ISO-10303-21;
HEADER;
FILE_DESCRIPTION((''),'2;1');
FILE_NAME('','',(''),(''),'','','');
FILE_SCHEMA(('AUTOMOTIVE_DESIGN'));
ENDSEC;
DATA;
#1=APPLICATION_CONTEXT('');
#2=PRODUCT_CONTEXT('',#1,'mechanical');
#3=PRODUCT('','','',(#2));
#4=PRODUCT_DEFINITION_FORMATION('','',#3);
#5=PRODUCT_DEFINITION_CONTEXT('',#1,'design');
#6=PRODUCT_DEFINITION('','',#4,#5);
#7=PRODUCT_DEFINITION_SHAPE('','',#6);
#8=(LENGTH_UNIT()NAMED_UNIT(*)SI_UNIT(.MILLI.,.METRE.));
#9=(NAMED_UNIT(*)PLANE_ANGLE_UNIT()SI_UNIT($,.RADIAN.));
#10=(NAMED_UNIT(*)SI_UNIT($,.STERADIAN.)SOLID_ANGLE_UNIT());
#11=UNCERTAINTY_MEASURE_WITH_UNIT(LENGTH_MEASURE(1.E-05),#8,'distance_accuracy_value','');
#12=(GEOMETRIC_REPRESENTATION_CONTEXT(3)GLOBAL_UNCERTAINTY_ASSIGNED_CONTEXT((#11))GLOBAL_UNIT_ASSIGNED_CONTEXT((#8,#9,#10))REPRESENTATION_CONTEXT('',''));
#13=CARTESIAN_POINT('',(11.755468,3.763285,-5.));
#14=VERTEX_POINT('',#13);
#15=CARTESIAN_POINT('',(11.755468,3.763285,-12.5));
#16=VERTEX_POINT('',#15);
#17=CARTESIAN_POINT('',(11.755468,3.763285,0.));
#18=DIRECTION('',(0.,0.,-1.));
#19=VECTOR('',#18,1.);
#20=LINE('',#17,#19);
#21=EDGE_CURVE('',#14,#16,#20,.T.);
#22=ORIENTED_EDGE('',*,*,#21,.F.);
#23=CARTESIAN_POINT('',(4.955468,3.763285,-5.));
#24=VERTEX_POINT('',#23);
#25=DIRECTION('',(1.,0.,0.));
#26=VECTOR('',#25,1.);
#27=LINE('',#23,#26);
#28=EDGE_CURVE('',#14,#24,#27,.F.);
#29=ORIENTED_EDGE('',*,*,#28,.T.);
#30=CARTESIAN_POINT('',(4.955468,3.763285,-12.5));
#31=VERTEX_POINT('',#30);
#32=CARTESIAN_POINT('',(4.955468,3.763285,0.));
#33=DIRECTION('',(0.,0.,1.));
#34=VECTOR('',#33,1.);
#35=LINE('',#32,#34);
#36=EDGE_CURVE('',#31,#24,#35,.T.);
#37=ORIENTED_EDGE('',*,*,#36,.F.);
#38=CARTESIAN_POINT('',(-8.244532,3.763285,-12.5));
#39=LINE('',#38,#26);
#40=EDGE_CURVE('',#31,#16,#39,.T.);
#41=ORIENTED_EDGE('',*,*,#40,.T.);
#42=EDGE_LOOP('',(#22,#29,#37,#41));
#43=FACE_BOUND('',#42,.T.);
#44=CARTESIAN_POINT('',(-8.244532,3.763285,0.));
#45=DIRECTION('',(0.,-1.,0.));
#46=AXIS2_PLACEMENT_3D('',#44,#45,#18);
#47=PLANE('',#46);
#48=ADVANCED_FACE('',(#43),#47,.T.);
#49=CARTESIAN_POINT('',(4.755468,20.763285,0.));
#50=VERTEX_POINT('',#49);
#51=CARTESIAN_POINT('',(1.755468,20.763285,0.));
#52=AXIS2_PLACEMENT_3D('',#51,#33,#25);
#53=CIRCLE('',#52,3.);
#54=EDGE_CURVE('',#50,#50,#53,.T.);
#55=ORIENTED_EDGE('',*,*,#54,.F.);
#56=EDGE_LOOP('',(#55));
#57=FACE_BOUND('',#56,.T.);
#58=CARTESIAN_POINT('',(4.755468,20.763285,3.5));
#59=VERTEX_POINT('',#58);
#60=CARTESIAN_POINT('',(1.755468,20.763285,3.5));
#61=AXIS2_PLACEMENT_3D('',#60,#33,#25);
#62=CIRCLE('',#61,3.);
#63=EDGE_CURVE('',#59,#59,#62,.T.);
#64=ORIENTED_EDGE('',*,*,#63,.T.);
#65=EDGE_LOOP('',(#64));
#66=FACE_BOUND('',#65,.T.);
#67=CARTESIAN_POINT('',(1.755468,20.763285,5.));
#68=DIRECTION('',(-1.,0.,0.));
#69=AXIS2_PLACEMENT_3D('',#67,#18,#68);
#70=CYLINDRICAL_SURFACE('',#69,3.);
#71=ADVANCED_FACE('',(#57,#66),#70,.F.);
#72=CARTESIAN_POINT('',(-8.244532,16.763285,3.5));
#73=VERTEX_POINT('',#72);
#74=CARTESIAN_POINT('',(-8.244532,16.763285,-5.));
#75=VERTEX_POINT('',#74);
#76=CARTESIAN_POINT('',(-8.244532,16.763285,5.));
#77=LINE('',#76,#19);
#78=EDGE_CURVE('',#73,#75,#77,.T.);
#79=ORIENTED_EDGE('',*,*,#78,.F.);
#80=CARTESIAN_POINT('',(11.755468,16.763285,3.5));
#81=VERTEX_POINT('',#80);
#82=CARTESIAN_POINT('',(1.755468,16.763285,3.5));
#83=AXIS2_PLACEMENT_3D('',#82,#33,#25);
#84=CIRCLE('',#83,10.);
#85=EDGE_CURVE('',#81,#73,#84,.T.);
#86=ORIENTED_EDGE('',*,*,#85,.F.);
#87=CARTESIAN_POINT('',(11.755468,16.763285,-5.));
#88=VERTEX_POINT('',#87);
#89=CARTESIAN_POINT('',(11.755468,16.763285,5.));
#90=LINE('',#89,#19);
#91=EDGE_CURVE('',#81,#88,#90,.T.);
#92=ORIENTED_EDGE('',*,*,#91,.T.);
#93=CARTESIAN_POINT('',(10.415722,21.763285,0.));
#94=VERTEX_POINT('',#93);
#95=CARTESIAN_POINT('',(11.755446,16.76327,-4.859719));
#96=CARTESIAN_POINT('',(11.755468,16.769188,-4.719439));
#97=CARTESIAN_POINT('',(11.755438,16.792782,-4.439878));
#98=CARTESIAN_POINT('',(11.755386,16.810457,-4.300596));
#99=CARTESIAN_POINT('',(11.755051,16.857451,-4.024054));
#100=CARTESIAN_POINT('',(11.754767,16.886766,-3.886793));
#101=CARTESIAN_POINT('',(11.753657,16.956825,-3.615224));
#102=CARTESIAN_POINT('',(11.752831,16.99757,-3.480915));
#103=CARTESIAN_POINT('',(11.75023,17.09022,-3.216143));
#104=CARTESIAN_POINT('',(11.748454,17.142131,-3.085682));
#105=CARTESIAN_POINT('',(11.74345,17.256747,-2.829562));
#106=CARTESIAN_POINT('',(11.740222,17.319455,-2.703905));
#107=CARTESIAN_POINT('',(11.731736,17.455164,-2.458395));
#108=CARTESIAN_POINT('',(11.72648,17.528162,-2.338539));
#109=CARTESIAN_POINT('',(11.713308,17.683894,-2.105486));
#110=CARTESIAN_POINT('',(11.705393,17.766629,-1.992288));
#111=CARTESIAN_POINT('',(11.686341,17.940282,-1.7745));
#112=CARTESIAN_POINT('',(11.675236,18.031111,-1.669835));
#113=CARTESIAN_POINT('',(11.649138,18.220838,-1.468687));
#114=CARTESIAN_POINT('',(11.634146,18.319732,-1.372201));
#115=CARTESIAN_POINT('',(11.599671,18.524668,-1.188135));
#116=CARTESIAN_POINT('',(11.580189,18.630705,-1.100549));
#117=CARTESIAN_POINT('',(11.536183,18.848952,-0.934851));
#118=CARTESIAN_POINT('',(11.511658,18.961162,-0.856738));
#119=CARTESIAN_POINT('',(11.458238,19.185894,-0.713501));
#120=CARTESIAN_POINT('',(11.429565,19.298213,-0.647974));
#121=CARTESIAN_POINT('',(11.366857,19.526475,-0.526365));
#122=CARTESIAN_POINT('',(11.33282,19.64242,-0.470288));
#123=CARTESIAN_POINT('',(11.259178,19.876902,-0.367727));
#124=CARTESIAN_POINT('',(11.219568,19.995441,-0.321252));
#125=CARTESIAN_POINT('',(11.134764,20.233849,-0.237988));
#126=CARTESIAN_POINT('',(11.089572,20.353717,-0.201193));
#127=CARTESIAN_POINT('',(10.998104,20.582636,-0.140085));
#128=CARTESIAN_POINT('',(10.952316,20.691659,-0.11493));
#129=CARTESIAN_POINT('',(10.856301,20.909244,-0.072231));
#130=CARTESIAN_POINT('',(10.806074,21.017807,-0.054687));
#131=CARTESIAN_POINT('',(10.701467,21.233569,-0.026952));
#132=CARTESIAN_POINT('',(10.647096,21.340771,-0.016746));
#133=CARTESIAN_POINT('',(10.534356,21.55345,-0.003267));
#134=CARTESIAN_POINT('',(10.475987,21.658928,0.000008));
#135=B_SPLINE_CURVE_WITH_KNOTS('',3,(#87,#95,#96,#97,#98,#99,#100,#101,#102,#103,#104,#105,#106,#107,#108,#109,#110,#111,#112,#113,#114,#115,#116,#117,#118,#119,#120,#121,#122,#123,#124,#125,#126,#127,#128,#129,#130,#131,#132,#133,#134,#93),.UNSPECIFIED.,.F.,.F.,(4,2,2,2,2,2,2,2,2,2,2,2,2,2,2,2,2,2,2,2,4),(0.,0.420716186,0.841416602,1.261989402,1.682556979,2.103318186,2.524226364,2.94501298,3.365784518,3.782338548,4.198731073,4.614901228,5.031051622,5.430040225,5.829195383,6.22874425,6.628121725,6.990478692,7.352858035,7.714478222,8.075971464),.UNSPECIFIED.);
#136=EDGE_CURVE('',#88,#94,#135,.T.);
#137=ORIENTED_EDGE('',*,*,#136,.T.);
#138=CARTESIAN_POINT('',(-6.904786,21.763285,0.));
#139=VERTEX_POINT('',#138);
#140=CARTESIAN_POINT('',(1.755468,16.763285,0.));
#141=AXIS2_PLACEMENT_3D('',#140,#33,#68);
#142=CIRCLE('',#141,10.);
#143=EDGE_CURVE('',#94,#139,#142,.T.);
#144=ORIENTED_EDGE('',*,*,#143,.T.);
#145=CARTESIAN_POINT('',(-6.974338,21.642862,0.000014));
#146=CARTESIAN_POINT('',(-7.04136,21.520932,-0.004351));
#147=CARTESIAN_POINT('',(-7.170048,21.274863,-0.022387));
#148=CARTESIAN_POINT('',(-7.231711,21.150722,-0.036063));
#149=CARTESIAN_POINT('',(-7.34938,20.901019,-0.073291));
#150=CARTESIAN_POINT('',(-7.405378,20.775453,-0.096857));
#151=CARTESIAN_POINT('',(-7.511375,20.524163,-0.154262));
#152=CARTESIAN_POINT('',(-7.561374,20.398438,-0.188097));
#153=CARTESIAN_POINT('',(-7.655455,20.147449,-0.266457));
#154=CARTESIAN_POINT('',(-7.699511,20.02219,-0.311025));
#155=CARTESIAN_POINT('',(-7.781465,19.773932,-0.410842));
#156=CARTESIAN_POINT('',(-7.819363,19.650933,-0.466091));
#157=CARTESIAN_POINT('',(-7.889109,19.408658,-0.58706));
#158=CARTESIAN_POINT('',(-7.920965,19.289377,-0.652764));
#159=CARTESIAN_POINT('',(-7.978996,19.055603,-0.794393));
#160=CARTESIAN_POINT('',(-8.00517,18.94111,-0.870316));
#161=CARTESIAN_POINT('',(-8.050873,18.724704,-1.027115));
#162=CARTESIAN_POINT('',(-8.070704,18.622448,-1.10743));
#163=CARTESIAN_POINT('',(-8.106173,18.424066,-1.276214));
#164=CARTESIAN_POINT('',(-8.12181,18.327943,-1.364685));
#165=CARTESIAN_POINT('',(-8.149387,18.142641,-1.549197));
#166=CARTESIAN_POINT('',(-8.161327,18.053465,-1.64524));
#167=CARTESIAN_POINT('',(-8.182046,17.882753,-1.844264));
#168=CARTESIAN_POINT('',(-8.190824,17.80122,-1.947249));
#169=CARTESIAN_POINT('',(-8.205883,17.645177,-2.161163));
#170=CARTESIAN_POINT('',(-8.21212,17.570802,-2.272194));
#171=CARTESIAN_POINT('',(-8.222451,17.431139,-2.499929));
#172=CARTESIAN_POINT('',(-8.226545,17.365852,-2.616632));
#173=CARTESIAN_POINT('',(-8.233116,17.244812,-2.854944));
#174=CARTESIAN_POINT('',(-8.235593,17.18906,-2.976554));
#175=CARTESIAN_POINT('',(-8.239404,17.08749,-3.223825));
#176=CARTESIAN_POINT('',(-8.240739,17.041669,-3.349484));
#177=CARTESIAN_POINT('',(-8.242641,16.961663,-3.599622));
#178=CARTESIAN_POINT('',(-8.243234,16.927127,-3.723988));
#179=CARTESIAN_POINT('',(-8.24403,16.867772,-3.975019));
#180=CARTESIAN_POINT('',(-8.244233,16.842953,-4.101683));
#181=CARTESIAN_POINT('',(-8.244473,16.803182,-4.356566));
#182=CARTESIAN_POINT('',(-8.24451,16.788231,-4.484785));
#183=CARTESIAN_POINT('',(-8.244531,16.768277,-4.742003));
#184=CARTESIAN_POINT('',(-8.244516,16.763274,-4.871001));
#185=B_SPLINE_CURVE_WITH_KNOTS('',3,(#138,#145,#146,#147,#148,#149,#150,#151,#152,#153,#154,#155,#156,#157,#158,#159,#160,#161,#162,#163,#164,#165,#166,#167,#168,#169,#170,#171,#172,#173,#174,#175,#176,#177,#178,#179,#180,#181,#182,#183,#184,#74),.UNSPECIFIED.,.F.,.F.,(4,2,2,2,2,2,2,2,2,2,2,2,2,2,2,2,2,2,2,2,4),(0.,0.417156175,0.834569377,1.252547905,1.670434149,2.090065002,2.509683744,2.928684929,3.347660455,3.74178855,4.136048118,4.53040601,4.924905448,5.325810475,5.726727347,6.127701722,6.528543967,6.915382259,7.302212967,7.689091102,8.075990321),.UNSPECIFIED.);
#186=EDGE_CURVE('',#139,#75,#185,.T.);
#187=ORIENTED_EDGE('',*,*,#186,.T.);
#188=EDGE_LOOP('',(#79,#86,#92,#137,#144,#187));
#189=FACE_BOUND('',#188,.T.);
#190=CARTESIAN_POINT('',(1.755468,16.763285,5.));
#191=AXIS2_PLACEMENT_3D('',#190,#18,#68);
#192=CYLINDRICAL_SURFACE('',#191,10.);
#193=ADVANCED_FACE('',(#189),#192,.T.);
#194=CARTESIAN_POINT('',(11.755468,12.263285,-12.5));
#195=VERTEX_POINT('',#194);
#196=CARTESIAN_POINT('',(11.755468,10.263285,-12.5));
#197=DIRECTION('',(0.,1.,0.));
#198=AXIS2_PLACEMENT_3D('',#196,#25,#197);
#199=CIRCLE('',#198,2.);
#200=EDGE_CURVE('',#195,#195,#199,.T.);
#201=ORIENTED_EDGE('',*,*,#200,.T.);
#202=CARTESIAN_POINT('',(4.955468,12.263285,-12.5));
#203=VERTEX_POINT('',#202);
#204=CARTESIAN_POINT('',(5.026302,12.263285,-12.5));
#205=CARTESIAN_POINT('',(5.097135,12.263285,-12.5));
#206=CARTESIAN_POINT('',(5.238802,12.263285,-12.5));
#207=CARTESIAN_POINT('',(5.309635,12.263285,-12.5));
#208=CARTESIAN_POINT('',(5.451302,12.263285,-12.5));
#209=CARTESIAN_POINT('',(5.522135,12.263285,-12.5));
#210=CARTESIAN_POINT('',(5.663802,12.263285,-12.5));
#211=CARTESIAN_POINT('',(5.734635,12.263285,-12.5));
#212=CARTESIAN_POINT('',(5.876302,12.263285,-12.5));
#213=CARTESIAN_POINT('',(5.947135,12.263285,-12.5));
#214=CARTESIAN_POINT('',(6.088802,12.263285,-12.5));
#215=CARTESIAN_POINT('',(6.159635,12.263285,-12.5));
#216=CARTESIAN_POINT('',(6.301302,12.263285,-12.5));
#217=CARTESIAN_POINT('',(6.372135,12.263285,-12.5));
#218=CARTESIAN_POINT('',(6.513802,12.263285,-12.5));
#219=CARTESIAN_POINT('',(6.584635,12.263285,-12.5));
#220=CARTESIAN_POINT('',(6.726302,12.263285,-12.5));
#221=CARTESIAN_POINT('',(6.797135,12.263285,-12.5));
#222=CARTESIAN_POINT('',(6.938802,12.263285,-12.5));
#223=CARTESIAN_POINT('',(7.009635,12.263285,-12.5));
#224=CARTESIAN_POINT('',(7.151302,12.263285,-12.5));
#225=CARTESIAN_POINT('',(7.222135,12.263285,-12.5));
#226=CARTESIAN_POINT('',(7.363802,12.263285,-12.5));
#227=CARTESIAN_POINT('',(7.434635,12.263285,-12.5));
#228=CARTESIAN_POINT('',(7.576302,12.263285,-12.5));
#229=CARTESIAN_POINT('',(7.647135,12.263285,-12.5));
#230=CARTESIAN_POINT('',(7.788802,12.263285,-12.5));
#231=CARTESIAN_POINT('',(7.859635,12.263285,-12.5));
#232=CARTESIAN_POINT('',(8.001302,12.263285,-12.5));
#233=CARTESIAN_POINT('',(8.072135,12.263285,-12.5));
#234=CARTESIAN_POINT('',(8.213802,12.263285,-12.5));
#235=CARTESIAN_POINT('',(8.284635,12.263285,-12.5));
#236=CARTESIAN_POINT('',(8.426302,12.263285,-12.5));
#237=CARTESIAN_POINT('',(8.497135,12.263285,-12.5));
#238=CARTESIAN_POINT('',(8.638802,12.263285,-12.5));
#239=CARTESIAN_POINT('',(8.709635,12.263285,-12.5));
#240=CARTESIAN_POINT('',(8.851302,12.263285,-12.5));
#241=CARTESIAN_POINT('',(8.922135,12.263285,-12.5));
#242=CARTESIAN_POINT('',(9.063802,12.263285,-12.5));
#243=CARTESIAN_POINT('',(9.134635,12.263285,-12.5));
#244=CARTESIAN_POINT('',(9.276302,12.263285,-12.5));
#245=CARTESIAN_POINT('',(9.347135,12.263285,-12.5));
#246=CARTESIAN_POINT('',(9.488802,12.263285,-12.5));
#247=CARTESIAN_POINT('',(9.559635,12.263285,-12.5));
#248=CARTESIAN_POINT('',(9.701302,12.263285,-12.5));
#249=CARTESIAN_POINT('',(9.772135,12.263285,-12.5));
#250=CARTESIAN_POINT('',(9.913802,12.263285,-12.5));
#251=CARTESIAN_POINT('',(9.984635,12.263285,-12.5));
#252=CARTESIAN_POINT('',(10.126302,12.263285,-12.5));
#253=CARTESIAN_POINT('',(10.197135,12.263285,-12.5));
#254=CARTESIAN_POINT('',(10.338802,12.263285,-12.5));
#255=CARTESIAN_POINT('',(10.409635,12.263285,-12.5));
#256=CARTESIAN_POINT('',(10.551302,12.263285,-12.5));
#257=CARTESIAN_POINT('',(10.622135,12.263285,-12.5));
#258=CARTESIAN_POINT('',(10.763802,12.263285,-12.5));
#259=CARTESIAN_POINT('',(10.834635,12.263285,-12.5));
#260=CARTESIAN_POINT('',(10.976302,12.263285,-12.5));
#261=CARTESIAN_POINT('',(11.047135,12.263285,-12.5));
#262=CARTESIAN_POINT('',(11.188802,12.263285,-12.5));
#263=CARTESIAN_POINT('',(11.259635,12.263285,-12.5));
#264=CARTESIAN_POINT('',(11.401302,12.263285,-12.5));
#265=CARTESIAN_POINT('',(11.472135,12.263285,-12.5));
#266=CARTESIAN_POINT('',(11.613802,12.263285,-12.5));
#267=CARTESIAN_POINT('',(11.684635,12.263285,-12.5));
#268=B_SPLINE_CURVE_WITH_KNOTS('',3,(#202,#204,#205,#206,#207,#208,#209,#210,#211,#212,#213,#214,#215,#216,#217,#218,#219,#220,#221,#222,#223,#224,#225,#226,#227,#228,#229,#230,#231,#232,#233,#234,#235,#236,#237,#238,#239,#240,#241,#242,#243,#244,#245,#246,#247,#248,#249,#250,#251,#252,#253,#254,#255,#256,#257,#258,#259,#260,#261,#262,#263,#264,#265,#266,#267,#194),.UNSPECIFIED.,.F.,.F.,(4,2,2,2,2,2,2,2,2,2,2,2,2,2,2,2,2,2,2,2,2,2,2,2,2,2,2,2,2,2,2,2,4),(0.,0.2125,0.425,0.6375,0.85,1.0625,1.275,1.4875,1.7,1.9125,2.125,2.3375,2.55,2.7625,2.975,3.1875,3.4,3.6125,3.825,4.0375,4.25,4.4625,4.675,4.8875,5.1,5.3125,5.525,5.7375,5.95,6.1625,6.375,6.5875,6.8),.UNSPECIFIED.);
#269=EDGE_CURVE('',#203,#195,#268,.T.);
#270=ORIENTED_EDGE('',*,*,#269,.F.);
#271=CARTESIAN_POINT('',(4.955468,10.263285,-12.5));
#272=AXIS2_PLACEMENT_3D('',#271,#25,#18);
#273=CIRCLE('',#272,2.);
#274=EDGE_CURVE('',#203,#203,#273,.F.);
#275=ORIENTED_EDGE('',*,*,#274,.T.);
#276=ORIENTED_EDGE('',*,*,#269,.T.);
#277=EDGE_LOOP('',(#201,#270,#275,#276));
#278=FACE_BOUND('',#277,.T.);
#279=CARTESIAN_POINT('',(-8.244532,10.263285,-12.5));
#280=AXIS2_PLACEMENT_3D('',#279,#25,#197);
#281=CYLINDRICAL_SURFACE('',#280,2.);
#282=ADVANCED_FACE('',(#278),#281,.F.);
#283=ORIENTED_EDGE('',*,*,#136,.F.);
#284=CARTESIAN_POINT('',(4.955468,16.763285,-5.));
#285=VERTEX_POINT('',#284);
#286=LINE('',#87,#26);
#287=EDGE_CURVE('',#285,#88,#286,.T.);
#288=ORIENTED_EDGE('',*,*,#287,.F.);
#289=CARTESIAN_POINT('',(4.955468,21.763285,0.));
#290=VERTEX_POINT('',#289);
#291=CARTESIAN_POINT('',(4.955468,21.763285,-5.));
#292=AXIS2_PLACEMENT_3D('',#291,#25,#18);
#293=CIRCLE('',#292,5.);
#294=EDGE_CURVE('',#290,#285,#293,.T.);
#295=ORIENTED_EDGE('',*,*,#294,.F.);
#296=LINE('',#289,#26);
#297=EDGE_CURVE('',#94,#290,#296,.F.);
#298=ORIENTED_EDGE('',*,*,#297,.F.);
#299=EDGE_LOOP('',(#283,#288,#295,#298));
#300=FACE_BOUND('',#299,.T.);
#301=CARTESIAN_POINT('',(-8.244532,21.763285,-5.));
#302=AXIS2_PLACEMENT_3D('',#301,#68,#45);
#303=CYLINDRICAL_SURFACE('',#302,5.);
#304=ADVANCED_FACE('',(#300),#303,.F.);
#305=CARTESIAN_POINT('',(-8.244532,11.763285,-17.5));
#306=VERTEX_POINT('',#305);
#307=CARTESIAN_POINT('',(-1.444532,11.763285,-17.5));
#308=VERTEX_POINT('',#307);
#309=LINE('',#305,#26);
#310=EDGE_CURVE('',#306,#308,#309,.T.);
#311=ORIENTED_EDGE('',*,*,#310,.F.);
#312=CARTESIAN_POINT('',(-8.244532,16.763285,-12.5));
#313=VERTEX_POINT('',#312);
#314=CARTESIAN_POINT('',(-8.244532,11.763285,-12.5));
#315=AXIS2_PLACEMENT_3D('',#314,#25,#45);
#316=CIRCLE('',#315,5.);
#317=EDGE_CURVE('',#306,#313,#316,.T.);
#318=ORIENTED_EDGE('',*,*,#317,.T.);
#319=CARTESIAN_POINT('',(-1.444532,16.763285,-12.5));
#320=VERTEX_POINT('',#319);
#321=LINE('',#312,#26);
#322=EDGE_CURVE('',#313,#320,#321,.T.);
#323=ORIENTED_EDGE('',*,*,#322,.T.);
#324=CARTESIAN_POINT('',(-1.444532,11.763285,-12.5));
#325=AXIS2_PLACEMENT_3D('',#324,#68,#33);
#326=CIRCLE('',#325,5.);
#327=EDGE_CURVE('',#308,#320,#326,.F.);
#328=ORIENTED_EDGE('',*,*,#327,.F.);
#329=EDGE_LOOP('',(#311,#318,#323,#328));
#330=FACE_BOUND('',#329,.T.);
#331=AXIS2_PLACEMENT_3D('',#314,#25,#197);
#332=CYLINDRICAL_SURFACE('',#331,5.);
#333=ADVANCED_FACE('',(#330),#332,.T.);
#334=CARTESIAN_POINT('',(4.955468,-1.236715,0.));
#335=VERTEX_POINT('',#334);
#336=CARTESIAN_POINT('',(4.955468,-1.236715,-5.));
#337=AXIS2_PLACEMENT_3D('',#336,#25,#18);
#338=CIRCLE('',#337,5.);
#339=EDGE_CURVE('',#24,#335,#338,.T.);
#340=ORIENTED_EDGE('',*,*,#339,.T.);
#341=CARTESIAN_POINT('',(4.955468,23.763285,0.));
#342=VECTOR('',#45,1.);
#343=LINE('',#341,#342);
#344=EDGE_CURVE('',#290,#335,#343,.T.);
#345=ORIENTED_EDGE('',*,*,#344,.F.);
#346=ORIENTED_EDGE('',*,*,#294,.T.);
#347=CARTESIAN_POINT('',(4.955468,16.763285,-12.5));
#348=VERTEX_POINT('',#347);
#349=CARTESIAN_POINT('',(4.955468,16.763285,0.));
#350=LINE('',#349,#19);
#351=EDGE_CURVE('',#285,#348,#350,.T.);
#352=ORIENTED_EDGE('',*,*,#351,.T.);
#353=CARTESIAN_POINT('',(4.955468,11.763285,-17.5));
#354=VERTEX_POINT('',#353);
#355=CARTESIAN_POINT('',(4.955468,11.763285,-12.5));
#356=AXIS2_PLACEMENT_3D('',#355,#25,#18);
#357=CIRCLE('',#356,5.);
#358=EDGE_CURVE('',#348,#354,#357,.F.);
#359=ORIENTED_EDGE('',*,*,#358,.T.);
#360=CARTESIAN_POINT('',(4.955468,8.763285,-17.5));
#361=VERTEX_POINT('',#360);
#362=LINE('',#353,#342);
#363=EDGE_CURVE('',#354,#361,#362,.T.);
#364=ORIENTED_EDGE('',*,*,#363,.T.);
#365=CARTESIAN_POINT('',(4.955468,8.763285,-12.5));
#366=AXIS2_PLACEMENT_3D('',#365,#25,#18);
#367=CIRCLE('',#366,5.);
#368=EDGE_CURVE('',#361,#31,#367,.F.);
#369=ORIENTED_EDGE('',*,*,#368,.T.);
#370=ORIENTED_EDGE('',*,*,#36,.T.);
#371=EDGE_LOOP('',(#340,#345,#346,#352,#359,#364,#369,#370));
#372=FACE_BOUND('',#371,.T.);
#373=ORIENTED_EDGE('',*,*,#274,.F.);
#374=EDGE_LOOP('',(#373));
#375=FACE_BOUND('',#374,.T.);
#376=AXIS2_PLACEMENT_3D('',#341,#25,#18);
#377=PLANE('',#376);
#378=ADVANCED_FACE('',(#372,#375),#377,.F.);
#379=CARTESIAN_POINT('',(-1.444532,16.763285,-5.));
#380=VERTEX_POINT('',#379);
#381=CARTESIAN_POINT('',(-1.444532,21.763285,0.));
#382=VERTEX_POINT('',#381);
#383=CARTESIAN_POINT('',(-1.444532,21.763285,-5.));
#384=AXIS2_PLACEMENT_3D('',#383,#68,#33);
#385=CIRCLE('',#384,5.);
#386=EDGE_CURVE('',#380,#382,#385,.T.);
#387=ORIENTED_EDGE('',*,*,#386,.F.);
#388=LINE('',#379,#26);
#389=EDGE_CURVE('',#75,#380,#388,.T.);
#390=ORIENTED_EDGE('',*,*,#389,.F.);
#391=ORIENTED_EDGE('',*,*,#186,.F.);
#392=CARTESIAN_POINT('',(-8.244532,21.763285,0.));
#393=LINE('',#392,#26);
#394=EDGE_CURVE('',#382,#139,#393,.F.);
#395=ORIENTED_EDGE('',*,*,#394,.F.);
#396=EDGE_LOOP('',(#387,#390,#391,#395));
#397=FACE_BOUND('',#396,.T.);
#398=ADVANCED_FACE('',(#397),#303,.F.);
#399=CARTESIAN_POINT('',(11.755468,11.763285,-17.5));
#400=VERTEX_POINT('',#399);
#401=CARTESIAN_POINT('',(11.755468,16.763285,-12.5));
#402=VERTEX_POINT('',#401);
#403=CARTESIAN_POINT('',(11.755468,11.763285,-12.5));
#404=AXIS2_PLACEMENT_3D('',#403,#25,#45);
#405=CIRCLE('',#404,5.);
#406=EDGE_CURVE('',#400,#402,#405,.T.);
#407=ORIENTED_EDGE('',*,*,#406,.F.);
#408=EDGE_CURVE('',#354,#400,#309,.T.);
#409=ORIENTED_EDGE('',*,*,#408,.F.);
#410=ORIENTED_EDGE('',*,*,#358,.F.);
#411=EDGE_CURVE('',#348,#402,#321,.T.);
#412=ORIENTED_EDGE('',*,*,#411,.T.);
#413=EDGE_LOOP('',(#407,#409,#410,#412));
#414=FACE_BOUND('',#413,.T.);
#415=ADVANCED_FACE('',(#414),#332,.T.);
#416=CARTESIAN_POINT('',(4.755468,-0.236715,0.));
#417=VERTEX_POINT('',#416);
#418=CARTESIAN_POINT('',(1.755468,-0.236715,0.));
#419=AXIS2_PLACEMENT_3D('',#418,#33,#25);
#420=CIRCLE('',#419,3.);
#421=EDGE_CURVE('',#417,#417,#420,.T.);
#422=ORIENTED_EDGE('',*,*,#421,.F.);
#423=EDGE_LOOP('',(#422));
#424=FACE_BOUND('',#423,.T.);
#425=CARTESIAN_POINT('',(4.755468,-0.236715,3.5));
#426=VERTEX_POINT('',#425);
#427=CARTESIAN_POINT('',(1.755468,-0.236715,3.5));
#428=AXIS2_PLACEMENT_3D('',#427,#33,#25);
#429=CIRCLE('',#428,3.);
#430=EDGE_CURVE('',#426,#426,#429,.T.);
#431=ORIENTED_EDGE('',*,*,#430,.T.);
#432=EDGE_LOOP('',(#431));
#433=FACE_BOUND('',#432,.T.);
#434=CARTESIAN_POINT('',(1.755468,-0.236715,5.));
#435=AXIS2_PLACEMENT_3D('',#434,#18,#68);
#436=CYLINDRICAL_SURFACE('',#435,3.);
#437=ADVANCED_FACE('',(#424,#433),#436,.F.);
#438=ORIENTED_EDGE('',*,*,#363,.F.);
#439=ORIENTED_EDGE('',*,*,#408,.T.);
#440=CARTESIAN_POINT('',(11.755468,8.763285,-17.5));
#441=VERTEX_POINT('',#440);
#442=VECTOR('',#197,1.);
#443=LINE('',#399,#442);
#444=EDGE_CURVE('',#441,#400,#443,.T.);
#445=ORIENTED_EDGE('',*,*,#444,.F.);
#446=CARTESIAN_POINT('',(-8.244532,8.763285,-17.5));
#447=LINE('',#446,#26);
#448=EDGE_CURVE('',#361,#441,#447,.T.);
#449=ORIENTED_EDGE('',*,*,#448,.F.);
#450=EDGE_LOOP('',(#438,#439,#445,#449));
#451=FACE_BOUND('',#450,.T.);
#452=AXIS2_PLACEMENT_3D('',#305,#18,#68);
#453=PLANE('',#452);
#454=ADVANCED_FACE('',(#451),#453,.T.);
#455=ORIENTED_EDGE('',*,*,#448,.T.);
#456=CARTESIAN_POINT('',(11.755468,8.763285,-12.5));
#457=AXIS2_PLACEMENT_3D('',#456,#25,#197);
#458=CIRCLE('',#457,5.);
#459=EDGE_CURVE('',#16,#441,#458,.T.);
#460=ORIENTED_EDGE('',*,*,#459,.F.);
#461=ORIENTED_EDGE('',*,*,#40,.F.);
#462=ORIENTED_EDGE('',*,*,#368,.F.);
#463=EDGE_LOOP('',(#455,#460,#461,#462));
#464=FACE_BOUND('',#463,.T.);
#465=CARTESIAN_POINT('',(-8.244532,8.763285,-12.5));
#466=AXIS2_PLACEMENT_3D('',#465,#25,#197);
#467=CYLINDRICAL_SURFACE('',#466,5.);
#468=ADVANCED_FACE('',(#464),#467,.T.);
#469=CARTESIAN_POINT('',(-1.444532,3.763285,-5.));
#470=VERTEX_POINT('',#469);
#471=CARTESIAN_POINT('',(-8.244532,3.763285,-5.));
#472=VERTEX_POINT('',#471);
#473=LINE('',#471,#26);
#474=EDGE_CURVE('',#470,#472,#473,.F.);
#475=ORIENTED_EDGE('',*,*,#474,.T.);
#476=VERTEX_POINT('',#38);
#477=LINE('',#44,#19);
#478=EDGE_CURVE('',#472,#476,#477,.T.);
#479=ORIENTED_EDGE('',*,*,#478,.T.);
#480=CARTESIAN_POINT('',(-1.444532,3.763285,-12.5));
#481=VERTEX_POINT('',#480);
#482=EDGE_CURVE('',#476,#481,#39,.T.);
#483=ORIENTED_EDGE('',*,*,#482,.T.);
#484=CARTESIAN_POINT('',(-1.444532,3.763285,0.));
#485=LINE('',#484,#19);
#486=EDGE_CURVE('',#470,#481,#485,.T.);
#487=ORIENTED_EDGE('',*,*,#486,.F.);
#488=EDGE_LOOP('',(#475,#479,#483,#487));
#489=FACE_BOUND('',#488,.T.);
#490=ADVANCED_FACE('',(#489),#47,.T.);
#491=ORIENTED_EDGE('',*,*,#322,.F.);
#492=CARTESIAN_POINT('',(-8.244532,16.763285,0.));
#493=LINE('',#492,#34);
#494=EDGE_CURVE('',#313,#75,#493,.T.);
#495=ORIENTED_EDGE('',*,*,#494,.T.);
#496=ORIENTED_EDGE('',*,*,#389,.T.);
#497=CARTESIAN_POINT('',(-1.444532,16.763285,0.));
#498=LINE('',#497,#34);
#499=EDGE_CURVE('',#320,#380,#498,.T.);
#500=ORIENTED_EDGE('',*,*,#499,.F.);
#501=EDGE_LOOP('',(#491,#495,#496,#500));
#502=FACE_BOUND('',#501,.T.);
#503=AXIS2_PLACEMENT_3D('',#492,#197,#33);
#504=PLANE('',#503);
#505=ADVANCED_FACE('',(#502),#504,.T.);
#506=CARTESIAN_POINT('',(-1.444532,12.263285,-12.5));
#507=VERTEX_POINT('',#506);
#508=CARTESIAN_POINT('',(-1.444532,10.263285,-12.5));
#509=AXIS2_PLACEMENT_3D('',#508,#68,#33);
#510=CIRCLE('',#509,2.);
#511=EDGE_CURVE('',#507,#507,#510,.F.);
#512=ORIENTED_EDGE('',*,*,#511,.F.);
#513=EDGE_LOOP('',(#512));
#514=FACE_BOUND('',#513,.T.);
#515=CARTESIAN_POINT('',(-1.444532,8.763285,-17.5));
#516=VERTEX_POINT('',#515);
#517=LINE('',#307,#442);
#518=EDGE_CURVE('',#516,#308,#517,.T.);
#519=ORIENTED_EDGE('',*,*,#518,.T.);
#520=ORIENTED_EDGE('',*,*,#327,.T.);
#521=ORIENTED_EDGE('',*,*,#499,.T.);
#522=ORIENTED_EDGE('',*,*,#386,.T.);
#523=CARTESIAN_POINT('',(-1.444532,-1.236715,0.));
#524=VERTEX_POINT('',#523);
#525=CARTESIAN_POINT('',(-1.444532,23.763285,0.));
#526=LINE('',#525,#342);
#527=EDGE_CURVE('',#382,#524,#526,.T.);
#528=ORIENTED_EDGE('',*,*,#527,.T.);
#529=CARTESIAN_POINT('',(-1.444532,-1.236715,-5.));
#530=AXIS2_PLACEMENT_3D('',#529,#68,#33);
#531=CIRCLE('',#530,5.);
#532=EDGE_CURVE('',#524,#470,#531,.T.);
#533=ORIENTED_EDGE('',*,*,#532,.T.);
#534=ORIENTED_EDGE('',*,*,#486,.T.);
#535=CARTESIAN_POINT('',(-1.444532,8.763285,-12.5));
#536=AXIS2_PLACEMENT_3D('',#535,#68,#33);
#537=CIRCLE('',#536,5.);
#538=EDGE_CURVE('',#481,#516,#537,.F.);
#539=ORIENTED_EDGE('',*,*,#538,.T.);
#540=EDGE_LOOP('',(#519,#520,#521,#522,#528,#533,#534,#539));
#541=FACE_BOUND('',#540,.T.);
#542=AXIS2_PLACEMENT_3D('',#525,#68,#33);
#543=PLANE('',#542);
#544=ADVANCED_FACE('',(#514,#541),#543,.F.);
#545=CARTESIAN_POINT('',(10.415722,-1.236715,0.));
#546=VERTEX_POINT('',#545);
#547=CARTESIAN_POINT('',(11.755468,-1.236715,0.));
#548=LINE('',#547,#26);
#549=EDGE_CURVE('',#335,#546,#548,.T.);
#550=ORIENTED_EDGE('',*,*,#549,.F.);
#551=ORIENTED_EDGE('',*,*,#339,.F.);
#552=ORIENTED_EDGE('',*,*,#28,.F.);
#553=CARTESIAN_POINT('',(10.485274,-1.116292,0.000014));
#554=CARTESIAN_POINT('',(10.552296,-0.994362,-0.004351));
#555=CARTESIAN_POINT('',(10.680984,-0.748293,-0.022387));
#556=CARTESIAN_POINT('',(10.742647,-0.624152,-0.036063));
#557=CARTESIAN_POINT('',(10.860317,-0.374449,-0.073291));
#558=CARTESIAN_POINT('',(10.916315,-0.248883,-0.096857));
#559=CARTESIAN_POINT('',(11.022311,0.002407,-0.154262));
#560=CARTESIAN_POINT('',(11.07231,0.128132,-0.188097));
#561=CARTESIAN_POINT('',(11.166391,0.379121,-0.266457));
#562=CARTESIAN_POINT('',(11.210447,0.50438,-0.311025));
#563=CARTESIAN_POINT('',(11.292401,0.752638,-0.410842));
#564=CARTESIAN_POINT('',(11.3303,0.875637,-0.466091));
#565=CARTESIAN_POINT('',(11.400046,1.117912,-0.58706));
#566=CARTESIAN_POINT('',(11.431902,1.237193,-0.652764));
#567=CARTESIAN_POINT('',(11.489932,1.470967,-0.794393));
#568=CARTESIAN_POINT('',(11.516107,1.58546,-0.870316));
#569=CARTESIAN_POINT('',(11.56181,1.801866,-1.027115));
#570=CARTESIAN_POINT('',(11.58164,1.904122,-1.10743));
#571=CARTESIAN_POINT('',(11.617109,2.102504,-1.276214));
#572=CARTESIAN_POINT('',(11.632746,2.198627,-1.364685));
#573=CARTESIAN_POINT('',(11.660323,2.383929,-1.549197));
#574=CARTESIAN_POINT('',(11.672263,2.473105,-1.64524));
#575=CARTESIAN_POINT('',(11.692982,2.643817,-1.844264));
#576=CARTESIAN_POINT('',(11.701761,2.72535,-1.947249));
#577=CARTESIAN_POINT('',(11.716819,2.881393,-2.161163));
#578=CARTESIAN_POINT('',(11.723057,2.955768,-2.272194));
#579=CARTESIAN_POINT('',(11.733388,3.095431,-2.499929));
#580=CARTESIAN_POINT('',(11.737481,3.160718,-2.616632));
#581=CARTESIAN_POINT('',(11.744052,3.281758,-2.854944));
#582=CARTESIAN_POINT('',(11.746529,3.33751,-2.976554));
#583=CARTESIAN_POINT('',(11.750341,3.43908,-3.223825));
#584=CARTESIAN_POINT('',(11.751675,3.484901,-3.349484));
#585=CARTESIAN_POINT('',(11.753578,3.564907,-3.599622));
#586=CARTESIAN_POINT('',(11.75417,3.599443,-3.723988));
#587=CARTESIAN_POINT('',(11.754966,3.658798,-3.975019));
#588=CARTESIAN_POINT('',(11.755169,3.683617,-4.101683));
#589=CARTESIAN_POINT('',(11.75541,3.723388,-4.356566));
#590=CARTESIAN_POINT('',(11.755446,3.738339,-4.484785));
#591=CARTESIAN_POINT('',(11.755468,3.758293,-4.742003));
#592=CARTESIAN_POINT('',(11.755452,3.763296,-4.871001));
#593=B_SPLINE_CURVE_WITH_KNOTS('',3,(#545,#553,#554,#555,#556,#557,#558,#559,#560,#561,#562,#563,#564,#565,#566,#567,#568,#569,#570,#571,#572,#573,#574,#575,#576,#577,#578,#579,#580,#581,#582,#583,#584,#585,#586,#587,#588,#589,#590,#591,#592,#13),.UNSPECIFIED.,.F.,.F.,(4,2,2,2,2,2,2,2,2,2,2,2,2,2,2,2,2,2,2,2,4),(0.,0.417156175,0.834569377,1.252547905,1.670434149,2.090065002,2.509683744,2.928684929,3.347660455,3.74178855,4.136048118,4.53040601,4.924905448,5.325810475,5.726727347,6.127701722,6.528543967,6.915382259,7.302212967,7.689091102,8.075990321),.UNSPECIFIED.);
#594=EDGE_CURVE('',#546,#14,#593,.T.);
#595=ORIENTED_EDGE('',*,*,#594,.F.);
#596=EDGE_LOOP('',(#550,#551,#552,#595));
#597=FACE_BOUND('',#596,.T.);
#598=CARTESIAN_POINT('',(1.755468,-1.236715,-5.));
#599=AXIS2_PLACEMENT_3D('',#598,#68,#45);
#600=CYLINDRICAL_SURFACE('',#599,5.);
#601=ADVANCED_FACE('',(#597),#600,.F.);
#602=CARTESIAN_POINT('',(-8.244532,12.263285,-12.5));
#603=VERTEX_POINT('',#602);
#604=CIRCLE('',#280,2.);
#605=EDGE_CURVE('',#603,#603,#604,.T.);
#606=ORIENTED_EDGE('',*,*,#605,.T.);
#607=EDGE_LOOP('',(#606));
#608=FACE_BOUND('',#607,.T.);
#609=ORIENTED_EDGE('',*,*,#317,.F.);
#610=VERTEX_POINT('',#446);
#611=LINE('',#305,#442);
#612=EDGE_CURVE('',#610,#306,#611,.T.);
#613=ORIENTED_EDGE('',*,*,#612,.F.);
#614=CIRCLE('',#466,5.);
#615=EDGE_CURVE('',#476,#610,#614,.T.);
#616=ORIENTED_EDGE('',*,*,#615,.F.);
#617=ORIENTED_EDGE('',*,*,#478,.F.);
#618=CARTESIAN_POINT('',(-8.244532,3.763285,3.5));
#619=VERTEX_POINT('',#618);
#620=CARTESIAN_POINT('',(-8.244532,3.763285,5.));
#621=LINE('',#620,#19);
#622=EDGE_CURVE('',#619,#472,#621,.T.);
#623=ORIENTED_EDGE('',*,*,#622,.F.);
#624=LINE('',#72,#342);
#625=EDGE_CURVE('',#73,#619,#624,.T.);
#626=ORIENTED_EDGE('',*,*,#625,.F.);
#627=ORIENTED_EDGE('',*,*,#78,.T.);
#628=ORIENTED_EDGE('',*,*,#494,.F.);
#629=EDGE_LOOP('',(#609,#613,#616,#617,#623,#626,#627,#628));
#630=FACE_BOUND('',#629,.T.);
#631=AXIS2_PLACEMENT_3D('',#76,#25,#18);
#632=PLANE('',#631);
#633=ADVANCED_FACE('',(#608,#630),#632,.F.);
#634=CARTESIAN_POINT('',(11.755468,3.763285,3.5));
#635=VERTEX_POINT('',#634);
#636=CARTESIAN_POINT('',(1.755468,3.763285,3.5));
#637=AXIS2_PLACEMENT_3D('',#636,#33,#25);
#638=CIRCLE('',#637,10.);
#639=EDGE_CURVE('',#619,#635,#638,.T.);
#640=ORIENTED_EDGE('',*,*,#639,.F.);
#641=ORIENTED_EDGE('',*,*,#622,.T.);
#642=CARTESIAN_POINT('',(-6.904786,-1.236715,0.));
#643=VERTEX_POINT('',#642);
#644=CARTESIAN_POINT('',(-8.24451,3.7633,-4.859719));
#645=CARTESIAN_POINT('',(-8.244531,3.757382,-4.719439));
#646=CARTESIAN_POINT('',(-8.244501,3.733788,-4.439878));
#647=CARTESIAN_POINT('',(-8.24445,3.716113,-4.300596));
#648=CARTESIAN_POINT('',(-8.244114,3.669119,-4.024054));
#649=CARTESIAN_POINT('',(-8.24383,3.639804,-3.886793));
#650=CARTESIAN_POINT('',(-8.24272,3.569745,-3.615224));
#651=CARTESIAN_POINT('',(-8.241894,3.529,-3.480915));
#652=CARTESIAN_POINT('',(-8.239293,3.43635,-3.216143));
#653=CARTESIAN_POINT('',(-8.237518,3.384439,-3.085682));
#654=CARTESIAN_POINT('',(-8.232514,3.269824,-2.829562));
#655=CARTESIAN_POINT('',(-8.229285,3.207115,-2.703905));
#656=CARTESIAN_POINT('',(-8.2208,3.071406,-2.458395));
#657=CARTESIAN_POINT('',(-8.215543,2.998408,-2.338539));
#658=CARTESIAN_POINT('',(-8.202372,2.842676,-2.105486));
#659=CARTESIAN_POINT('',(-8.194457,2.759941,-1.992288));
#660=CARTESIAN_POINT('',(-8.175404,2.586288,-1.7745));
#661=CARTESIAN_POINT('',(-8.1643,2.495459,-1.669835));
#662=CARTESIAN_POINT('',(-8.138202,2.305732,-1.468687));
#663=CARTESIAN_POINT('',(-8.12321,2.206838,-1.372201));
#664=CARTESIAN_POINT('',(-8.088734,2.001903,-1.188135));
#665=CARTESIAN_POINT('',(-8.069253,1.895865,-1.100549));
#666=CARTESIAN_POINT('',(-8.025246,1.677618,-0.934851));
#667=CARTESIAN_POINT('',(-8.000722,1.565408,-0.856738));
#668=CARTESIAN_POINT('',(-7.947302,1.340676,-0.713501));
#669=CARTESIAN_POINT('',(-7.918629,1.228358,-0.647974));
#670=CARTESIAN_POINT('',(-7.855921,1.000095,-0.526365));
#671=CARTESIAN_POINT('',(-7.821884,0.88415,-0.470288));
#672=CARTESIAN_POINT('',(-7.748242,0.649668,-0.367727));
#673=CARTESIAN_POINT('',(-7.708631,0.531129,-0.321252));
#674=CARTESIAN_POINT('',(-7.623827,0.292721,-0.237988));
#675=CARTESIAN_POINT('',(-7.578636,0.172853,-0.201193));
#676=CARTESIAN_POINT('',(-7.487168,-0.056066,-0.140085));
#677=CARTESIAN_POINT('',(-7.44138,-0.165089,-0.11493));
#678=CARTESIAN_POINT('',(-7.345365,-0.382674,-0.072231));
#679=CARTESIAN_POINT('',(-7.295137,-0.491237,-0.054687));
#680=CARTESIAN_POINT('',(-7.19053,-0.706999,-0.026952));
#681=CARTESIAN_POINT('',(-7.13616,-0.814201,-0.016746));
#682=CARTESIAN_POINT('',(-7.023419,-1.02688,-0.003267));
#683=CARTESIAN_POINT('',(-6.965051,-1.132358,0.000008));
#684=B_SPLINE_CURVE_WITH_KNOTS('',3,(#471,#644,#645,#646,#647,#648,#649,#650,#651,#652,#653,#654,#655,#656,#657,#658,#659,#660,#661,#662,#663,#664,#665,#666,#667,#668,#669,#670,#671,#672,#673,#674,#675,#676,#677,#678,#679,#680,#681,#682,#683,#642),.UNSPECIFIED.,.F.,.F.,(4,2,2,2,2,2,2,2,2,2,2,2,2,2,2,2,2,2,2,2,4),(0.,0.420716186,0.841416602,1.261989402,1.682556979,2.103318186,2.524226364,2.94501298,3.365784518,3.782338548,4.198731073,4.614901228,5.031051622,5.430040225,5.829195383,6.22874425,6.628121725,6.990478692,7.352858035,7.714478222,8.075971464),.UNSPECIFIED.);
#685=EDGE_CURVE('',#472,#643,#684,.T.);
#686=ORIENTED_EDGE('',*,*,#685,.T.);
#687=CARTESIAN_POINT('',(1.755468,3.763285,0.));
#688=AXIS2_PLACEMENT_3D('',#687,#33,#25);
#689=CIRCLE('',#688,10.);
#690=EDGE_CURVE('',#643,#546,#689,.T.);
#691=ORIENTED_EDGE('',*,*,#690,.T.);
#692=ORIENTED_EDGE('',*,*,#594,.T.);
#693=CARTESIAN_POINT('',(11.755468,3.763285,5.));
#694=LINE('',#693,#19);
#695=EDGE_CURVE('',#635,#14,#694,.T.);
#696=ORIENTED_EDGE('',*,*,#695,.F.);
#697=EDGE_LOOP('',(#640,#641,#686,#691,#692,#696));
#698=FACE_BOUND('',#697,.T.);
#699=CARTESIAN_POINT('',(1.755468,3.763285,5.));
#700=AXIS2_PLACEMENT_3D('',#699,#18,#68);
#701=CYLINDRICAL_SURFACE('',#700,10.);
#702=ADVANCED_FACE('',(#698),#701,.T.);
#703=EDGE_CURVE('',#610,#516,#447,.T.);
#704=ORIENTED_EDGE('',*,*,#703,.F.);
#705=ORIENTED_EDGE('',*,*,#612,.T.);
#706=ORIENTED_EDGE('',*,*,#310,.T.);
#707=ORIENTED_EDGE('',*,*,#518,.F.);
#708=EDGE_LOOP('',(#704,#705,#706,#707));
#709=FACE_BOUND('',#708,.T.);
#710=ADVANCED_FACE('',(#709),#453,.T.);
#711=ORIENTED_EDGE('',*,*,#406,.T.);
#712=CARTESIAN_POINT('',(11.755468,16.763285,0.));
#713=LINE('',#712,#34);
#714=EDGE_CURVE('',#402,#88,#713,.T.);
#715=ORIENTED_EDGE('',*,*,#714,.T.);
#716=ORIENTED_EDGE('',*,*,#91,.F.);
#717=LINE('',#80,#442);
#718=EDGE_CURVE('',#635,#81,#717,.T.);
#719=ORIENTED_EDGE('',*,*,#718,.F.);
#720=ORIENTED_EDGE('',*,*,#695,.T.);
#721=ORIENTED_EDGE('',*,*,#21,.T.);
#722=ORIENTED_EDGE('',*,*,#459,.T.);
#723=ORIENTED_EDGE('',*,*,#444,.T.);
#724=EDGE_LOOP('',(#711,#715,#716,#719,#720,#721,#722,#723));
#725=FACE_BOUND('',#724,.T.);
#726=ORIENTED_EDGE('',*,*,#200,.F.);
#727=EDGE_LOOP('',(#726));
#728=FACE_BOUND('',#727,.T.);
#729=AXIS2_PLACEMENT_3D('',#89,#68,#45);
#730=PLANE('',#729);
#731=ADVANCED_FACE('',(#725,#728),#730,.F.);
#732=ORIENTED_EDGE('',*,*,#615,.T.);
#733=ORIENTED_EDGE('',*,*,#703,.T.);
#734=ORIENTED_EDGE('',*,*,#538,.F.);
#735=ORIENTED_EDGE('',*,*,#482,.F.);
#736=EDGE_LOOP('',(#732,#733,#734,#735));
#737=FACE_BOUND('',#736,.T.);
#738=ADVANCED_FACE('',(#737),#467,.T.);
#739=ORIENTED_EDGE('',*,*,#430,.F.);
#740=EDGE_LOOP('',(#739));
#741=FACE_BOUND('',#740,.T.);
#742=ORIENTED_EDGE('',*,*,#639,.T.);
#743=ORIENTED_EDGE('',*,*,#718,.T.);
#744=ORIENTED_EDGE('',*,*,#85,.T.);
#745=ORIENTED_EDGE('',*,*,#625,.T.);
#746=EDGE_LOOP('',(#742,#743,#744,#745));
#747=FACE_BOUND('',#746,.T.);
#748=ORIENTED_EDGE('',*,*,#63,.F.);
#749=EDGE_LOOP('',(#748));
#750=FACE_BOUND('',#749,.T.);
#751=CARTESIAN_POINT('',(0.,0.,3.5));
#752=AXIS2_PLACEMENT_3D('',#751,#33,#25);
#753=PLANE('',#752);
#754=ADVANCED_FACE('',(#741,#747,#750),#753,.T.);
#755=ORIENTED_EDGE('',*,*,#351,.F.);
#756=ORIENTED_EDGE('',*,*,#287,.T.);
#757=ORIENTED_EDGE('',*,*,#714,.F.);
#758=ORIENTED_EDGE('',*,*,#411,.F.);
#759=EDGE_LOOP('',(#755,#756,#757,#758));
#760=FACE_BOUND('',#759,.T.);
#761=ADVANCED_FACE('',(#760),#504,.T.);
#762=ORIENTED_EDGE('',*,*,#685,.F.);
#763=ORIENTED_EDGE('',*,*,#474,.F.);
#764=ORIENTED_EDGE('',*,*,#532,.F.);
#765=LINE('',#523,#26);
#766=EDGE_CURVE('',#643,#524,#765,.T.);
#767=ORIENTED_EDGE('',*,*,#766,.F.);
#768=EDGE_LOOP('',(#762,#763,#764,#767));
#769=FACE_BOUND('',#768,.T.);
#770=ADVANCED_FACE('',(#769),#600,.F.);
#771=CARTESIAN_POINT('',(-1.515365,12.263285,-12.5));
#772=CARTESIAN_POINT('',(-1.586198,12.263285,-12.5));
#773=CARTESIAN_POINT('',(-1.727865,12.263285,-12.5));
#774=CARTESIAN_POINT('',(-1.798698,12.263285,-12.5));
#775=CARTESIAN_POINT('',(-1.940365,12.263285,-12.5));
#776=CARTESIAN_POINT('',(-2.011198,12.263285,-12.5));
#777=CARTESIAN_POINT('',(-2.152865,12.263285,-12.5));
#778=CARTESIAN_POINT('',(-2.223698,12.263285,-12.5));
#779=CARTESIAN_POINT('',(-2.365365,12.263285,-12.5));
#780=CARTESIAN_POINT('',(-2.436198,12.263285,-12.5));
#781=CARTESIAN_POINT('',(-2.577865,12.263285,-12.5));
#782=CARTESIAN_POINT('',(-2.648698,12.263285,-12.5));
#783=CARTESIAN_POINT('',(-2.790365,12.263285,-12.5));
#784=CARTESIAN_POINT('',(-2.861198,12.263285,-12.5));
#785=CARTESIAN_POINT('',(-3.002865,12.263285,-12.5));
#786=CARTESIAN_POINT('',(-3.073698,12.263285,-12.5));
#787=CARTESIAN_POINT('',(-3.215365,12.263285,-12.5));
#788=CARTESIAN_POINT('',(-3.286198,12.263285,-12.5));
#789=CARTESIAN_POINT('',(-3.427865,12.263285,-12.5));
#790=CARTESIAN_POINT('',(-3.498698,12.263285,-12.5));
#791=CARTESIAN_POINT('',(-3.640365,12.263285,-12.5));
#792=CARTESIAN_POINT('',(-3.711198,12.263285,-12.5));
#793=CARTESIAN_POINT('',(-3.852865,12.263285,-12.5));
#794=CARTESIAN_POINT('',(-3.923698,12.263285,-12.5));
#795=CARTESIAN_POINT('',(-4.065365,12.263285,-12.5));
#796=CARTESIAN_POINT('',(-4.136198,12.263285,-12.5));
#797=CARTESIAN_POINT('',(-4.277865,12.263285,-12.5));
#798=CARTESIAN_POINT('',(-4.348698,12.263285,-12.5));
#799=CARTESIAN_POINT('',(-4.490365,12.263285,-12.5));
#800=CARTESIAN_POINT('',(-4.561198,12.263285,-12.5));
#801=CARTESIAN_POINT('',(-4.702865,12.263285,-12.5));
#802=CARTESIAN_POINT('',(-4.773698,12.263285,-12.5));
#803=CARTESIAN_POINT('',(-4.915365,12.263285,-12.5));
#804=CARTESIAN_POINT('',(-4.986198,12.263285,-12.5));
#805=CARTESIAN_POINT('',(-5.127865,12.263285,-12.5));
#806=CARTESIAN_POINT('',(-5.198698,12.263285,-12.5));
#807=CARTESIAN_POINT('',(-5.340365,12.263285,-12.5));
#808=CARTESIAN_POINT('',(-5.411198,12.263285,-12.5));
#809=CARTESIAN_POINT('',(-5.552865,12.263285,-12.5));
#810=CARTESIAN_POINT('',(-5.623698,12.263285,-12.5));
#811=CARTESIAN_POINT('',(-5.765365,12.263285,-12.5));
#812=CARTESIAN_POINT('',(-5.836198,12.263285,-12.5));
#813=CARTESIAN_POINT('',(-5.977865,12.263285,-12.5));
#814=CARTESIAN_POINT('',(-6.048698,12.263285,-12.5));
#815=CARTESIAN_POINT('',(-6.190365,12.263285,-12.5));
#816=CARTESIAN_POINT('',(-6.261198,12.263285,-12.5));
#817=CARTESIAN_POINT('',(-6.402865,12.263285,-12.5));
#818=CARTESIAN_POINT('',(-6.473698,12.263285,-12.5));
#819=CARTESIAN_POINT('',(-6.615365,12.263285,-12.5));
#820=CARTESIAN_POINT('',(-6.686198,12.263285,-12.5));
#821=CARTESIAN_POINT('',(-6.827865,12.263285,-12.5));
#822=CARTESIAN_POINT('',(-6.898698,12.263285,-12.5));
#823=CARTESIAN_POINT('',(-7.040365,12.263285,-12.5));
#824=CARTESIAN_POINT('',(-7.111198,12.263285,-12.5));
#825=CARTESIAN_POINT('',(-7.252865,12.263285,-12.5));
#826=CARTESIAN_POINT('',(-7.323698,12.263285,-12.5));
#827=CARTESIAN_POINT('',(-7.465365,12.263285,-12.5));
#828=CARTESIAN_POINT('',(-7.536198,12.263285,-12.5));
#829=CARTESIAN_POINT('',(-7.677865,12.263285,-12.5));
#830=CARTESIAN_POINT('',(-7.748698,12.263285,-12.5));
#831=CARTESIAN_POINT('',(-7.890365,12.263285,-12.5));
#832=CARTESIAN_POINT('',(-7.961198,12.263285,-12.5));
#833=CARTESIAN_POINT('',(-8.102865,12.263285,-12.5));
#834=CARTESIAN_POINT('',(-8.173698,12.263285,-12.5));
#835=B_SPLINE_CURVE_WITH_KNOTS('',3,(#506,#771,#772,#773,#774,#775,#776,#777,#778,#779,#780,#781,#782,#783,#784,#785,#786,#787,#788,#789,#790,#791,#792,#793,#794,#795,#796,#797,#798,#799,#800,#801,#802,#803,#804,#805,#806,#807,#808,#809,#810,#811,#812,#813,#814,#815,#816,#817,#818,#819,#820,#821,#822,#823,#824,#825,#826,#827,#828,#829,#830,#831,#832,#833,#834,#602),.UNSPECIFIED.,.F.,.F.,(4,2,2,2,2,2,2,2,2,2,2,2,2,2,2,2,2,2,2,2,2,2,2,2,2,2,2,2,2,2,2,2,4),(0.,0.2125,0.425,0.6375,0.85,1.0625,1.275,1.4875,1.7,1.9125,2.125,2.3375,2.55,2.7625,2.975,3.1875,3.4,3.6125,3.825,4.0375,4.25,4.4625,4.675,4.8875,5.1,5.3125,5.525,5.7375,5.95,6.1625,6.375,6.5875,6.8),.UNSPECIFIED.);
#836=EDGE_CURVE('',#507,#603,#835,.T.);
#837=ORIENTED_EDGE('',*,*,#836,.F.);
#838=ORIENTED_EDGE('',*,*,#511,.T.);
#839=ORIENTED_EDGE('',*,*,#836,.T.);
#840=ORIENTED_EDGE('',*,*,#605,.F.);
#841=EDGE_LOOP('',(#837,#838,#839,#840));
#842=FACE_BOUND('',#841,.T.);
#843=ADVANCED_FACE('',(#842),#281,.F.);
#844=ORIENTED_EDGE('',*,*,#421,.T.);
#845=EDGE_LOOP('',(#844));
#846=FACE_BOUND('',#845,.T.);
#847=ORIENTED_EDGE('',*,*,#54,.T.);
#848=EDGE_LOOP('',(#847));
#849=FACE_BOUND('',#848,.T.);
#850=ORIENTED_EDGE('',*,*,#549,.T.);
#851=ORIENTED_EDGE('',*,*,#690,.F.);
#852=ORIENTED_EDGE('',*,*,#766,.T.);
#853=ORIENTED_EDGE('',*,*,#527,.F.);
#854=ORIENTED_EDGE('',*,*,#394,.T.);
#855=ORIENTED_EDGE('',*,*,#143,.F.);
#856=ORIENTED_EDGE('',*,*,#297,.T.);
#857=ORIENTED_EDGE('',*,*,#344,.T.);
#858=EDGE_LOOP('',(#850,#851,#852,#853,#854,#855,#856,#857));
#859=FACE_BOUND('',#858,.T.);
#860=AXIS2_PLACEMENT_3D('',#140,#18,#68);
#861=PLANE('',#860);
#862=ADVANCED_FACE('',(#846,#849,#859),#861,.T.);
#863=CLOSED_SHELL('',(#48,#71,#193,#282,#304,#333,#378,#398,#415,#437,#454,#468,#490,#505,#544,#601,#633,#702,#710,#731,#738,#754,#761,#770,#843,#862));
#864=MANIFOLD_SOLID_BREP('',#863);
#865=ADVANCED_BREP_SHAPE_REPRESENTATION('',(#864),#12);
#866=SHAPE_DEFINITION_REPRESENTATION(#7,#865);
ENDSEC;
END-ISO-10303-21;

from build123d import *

# Parameters (mm, degrees)
ESQUISSE1_R             = 3
BOSS_EXTRU_1_DEPTH      = 5
ESQUISSE2_R             = 2
BOSS_EXTRU_2_DEPTH      = 20
ESQUISSE3_W             = 6.4
ESQUISSE3_H             = 20
ENL_V_MAT_EXTRU_1_DEPTH = 20
CONG_1_R                = 5
ESQUISSE4_W             = 33.851998375
ESQUISSE4_H             = 43.433745971
ENL_V_MAT_EXTRU_2_DEPTH = 1.5


with BuildPart() as part:
    # Esquisse1 → Boss.-Extru.1 (new body)
    with BuildSketch(Plane.XY):
        with BuildLine():
            Line((-8.244531767, 16.763285024), (-8.244531767, 3.763285024))
            ThreePointArc((-8.244531767, 3.763285024), (1.755468233, -6.236714976), (11.755468233, 3.763285024))
            Line((11.755468233, 3.763285024), (11.755468233, 16.763285024))
            ThreePointArc((11.755468233, 16.763285024), (1.755468233, 26.763285024), (-8.244531767, 16.763285024))
        make_face()
        with Locations((1.755468233, 20.763285024)):
            Circle(ESQUISSE1_R, mode=Mode.SUBTRACT)
        with Locations((1.755468233, -0.236714976)):
            Circle(ESQUISSE1_R, mode=Mode.SUBTRACT)
    extrude(amount=BOSS_EXTRU_1_DEPTH)

    # Esquisse2 → Boss.-Extru.2 (add)
    with BuildSketch(Plane(origin=(11.755468233, 0, 0), x_dir=(0, 0, -1), z_dir=(1, 0, 0))):
        with BuildLine():
            Line((0, 16.763285024), (12.5, 16.763285024))
            ThreePointArc((12.5, 16.763285024), (16.035533906, 15.29881893), (17.5, 11.763285024))
            Line((17.5, 11.763285024), (17.5, 8.763285024))
            ThreePointArc((17.5, 8.763285024), (16.035533906, 5.227751118), (12.5, 3.763285024))
            Line((12.5, 3.763285024), (0, 3.763285024))
            Line((0, 3.763285024), (0, 16.763285024))
        make_face()
        with Locations(Location((12.5, 10.263285024, 0), (0, 0, 90))):
            Circle(ESQUISSE2_R, mode=Mode.SUBTRACT)
    extrude(amount=-BOSS_EXTRU_2_DEPTH)

    # Esquisse3 → Enlèv. mat.-Extru.1 (cut)
    with BuildSketch(Plane(origin=(0, 3.763285024, 0), x_dir=(-1, 0, 0), z_dir=(0, -1, 0))):
        with Locations((-1.755468233, 10)):
            Rectangle(ESQUISSE3_W, ESQUISSE3_H)
    extrude(amount=-ENL_V_MAT_EXTRU_1_DEPTH, mode=Mode.SUBTRACT)

    # Congé1
    # the kernel refuses this fillet: 5 mm, written as the material it adds along each edge
    with BuildSketch(Plane(origin=(11.055468233, 3.763285024, 0), x_dir=(0, -1, 0), z_dir=(-1, 0, 0))) as cong_1_piece_1_section:
        with BuildLine():
            CenterArc((CONG_1_R, -CONG_1_R), CONG_1_R, 90, 90)
            Line((0, -CONG_1_R), (0, 0))
            Line((0, 0), (CONG_1_R, 0))
        make_face()
    cong_1_piece_1 = extrude(amount=31.8, mode=Mode.PRIVATE)
    cong_1_piece_1 = split(cong_1_piece_1, bisect_by=Plane(origin=(4.955468233, 2.647494644, -1.117206211), z_dir=(1, 0, 0)), keep=Keep.TOP, mode=Mode.PRIVATE)
    cong_1_piece_1 = cong_1_piece_1 & Plane(origin=(1.755468233, 3.763285024, -1.117206211), x_dir=(-1, 0, 0), z_dir=(0, 0, -1)) * Cylinder(10, 84, mode=Mode.PRIVATE)
    add(cong_1_piece_1)
    with BuildSketch(Plane(origin=(-1.444531767, 3.763285024, 0), x_dir=(0, -1, 0), z_dir=(-1, 0, 0))) as cong_1_piece_2_section:
        with BuildLine():
            CenterArc((CONG_1_R, -CONG_1_R), CONG_1_R, 90, 90)
            Line((0, -CONG_1_R), (0, 0))
            Line((0, 0), (CONG_1_R, 0))
        make_face()
    cong_1_piece_2 = extrude(amount=19.3, mode=Mode.PRIVATE)
    cong_1_piece_2 = cong_1_piece_2 & Plane(origin=(1.755468233, 3.763285024, -1.127936598), x_dir=(-1, 0, 0), z_dir=(0, 0, -1)) * Cylinder(10, 59, mode=Mode.PRIVATE)
    add(cong_1_piece_2)
    with BuildSketch(Plane(origin=(11.055468233, 16.763285024, 0), x_dir=(0, 1, 0), z_dir=(-1, 0, 0))) as cong_1_piece_3_section:
        with BuildLine():
            CenterArc((CONG_1_R, CONG_1_R), CONG_1_R, 180, 90)
            Line((0, CONG_1_R), (0, 0))
            Line((0, 0), (CONG_1_R, 0))
        make_face()
    cong_1_piece_3 = extrude(amount=31.8, mode=Mode.PRIVATE)
    cong_1_piece_3 = split(cong_1_piece_3, bisect_by=Plane(origin=(4.955468233, 17.879075405, -1.117206211), z_dir=(1, 0, 0)), keep=Keep.TOP, mode=Mode.PRIVATE)
    cong_1_piece_3 = cong_1_piece_3 & Plane(origin=(1.755468233, 16.763285024, -1.117206211), x_dir=(1, 0, 0), z_dir=(0, 0, -1)) * Cylinder(10, 84, mode=Mode.PRIVATE)
    add(cong_1_piece_3)
    with BuildSketch(Plane(origin=(-1.444531767, 16.763285024, 0), x_dir=(0, 1, 0), z_dir=(-1, 0, 0))) as cong_1_piece_4_section:
        with BuildLine():
            CenterArc((CONG_1_R, CONG_1_R), CONG_1_R, 180, 90)
            Line((0, CONG_1_R), (0, 0))
            Line((0, 0), (CONG_1_R, 0))
        make_face()
    cong_1_piece_4 = extrude(amount=19.3, mode=Mode.PRIVATE)
    cong_1_piece_4 = cong_1_piece_4 & Plane(origin=(1.755468233, 16.763285024, -1.127936804), x_dir=(1, 0, 0), z_dir=(0, 0, -1)) * Cylinder(10, 59, mode=Mode.PRIVATE)
    add(cong_1_piece_4)
    with BuildSketch(Plane(origin=(24.255468233, 3.763285024, 0), x_dir=(0, -1, 0), z_dir=(-1, 0, 0))) as cong_1_piece_5_section:
        with BuildLine():
            CenterArc((CONG_1_R, -CONG_1_R), CONG_1_R, 90, 90)
            Line((0, -CONG_1_R), (0, 0))
            Line((0, 0), (CONG_1_R, 0))
        make_face()
    cong_1_piece_5 = extrude(amount=19.3, mode=Mode.PRIVATE)
    cong_1_piece_5 = cong_1_piece_5 & Plane(origin=(1.755468233, 3.763285024, -1.127936804), x_dir=(-1, 0, 0), z_dir=(0, 0, -1)) * Cylinder(10, 59, mode=Mode.PRIVATE)
    add(cong_1_piece_5)
    with BuildSketch(Plane(origin=(24.255468233, 3.763285024, 0), x_dir=(0, -1, 0), z_dir=(-1, 0, 0))) as cong_1_piece_6_section:
        with BuildLine():
            CenterArc((CONG_1_R, -CONG_1_R), CONG_1_R, 90, 90)
            Line((0, -CONG_1_R), (0, 0))
            Line((0, 0), (CONG_1_R, 0))
        make_face()
    cong_1_piece_6 = extrude(amount=31.8, mode=Mode.PRIVATE)
    cong_1_piece_6 = split(cong_1_piece_6, bisect_by=Plane(origin=(-1.444531767, 2.647494643, -1.117206211), z_dir=(-1, 0, 0)), keep=Keep.TOP, mode=Mode.PRIVATE)
    cong_1_piece_6 = cong_1_piece_6 & Plane(origin=(1.755468233, 3.763285024, -1.117206211), x_dir=(-1, 0, 0), z_dir=(0, 0, -1)) * Cylinder(10, 84, mode=Mode.PRIVATE)
    add(cong_1_piece_6)
    with BuildSketch(Plane(origin=(24.255468233, 16.763285024, 0), x_dir=(0, 1, 0), z_dir=(-1, 0, 0))) as cong_1_piece_7_section:
        with BuildLine():
            CenterArc((CONG_1_R, CONG_1_R), CONG_1_R, 180, 90)
            Line((0, CONG_1_R), (0, 0))
            Line((0, 0), (CONG_1_R, 0))
        make_face()
    cong_1_piece_7 = extrude(amount=19.3, mode=Mode.PRIVATE)
    cong_1_piece_7 = cong_1_piece_7 & Plane(origin=(1.755468233, 16.763285024, -1.127936599), x_dir=(1, 0, 0), z_dir=(0, 0, -1)) * Cylinder(10, 59, mode=Mode.PRIVATE)
    add(cong_1_piece_7)
    with BuildSketch(Plane(origin=(24.255468233, 16.763285024, 0), x_dir=(0, 1, 0), z_dir=(-1, 0, 0))) as cong_1_piece_8_section:
        with BuildLine():
            CenterArc((CONG_1_R, CONG_1_R), CONG_1_R, 180, 90)
            Line((0, CONG_1_R), (0, 0))
            Line((0, 0), (CONG_1_R, 0))
        make_face()
    cong_1_piece_8 = extrude(amount=31.8, mode=Mode.PRIVATE)
    cong_1_piece_8 = split(cong_1_piece_8, bisect_by=Plane(origin=(-1.444531767, 17.879075405, -1.117206211), z_dir=(-1, 0, 0)), keep=Keep.TOP, mode=Mode.PRIVATE)
    cong_1_piece_8 = cong_1_piece_8 & Plane(origin=(1.755468233, 16.763285024, -1.117206211), x_dir=(1, 0, 0), z_dir=(0, 0, -1)) * Cylinder(10, 84, mode=Mode.PRIVATE)
    add(cong_1_piece_8)

    # Esquisse4 → Enlèv. mat.-Extru.2 (cut)
    with BuildSketch(Plane.XY.offset(5)):
        with Locations((2.77063873, 9.526227517)):
            Rectangle(ESQUISSE4_W, ESQUISSE4_H)
    extrude(amount=-ENL_V_MAT_EXTRU_2_DEPTH, mode=Mode.SUBTRACT)


solid = part.part
